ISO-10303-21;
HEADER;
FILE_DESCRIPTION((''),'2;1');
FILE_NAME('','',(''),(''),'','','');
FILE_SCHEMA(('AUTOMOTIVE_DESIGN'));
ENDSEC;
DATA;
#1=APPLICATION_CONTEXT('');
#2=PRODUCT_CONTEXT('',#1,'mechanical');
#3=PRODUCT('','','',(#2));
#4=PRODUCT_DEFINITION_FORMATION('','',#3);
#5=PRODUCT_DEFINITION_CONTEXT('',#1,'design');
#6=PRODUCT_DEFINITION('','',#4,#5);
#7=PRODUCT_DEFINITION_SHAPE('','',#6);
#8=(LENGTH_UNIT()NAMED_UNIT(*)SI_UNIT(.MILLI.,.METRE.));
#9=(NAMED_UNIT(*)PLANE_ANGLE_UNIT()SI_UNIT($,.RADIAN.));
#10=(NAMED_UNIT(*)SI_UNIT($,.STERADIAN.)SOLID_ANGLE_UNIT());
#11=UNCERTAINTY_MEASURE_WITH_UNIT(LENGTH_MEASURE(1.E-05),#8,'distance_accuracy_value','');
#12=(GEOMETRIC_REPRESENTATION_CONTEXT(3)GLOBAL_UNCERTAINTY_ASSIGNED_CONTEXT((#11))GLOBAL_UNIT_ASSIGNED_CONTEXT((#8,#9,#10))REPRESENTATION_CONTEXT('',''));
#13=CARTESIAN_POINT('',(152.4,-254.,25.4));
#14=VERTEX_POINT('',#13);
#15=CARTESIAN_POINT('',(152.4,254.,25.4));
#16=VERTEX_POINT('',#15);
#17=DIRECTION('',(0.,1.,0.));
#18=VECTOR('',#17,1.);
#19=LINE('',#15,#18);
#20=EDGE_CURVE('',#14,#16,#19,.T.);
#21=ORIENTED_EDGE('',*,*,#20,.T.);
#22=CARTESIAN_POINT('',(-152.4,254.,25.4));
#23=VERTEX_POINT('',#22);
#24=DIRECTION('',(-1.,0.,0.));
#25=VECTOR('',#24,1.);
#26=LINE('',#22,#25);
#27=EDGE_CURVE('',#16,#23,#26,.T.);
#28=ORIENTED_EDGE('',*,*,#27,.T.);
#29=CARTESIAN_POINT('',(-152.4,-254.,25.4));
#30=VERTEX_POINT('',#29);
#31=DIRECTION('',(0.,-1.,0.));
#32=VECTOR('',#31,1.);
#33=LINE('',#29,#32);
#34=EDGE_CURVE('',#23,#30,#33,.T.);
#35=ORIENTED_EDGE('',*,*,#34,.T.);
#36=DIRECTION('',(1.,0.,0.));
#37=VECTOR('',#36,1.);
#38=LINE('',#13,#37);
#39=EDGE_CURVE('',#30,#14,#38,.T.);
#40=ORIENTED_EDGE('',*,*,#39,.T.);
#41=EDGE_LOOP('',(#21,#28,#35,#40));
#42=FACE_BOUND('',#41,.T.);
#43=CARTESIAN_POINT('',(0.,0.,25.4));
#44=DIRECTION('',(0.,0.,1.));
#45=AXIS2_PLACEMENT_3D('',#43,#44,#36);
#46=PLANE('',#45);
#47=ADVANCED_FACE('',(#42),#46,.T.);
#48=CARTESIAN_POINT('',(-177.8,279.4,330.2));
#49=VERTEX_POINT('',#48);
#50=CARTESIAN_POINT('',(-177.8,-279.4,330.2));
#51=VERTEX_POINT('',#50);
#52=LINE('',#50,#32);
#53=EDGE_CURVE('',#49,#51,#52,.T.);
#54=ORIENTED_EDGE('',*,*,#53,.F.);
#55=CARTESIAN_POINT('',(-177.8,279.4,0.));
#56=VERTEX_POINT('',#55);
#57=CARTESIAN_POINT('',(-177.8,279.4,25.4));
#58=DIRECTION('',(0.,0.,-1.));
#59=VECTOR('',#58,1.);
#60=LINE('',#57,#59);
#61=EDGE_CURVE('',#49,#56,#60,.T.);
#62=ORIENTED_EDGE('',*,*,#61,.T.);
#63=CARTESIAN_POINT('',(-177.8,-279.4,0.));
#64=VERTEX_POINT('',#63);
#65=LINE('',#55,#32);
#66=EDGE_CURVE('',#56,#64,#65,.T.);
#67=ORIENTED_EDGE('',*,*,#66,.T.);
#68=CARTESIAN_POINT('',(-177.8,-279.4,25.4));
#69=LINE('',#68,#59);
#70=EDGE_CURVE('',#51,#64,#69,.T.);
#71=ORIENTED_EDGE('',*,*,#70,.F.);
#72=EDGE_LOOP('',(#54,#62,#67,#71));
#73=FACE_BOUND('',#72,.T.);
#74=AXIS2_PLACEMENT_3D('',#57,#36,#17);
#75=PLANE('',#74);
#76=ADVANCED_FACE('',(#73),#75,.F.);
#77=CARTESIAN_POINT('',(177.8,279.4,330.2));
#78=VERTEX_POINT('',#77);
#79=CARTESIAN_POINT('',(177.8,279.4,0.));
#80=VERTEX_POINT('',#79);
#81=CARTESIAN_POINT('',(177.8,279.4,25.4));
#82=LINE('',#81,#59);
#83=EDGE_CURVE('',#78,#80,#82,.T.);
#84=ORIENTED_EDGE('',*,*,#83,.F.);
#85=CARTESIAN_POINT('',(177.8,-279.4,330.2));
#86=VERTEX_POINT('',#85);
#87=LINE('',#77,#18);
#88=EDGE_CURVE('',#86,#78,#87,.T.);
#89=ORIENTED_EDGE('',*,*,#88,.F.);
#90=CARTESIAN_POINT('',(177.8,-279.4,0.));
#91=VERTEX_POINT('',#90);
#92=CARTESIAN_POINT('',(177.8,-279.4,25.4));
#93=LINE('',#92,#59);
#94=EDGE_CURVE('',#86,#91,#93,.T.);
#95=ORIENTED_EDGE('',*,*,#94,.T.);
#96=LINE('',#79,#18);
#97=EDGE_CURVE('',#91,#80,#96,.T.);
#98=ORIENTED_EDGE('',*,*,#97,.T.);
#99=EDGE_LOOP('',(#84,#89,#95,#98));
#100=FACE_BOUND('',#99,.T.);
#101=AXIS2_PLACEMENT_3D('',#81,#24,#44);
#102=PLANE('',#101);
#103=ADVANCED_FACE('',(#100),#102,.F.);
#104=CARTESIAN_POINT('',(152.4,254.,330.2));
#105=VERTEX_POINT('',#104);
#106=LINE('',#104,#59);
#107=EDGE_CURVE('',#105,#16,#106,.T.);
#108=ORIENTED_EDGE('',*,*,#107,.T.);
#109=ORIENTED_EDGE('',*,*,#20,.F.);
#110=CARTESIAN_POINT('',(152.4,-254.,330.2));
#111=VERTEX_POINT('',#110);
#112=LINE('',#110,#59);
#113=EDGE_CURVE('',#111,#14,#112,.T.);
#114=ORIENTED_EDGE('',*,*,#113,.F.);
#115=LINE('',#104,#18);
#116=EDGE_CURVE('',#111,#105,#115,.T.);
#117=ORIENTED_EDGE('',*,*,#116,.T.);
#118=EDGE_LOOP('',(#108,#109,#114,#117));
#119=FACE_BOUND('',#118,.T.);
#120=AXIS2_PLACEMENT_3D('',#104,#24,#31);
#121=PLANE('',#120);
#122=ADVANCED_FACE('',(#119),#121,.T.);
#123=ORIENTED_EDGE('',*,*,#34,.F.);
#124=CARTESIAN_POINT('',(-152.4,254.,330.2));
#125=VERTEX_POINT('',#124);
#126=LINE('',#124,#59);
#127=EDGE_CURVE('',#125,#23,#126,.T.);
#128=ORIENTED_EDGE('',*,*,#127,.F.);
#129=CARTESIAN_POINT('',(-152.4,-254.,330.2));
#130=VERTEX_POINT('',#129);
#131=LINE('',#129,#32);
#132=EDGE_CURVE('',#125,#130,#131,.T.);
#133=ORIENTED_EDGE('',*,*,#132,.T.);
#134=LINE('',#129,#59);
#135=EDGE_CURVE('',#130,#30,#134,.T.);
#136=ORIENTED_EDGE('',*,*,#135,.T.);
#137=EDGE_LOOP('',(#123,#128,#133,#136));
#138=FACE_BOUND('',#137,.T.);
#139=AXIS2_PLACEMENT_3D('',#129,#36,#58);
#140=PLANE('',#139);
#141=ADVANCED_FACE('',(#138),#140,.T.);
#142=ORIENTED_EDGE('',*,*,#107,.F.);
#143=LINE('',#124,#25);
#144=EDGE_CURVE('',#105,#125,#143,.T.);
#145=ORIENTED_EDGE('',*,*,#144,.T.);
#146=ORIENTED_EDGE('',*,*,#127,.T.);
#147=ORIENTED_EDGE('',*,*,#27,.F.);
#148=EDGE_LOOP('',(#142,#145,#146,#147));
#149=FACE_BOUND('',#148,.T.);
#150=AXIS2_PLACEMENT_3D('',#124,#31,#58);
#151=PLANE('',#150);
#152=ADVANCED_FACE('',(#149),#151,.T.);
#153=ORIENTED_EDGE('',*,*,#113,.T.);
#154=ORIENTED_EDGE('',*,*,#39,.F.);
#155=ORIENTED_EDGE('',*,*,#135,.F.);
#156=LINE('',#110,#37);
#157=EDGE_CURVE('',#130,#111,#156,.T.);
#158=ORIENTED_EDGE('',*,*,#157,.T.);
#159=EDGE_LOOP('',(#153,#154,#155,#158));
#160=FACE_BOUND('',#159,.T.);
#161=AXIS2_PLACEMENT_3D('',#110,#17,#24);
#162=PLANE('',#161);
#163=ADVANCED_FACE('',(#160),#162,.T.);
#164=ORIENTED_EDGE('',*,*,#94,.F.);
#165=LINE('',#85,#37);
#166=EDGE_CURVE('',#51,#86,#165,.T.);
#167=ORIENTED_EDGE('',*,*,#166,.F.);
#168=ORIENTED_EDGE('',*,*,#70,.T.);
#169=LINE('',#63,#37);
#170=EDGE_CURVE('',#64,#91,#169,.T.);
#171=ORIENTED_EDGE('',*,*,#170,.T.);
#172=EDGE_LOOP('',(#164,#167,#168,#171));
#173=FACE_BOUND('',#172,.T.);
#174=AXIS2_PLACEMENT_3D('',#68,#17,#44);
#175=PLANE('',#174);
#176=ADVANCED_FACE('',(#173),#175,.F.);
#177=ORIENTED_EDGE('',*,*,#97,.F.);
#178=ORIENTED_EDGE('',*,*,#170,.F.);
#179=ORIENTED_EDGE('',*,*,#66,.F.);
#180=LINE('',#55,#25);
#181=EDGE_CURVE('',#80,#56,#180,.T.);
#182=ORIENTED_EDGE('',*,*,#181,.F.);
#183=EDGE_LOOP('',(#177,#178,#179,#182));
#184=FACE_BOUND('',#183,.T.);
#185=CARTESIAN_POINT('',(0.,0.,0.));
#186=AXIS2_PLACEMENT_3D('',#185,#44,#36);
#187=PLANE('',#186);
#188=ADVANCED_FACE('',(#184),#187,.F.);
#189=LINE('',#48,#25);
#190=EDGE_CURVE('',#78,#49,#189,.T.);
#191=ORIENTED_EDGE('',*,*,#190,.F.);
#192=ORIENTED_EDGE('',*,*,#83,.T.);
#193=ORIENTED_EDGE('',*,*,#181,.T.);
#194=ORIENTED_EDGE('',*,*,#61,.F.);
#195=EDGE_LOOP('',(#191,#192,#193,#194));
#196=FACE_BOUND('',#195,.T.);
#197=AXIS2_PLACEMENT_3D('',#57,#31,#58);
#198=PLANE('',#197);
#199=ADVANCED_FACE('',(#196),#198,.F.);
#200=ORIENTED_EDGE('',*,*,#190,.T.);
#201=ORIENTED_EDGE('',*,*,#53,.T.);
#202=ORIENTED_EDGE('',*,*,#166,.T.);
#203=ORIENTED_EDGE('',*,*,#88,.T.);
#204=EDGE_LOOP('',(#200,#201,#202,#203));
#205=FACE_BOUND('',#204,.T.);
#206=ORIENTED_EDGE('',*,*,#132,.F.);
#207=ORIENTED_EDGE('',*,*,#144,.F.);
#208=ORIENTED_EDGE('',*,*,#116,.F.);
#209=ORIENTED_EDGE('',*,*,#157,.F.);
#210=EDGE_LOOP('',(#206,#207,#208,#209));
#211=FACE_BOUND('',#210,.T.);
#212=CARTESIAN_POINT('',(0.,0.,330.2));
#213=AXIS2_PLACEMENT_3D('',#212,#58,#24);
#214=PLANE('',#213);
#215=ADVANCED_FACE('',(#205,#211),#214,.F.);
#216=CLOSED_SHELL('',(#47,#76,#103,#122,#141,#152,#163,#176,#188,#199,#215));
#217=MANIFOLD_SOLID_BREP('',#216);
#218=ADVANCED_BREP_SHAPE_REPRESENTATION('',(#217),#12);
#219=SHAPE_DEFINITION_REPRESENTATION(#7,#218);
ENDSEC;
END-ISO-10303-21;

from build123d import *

# Parameters (mm, degrees)
SKETCH2_W           = 355.6
SKETCH2_H           = 558.8
BOSS_EXTRUDE1_DEPTH = 25.4
SKETCH3_W           = 355.6
SKETCH3_H           = 558.8
SKETCH3_W_2         = 304.8
SKETCH3_H_2         = 508
BOSS_EXTRUDE2_DEPTH = 304.8


with BuildPart() as part:
    # Sketch2 → Boss-Extrude1 (new body)
    with BuildSketch(Plane.XY):
        Rectangle(SKETCH2_W, SKETCH2_H)
    extrude(amount=BOSS_EXTRUDE1_DEPTH)

    # Sketch3 → Boss-Extrude2 (add)
    with BuildSketch(Plane.XY.offset(25.4)):
        Rectangle(SKETCH3_W, SKETCH3_H)
        Rectangle(SKETCH3_W_2, SKETCH3_H_2, mode=Mode.SUBTRACT)
    extrude(amount=BOSS_EXTRUDE2_DEPTH)


solid = part.part
